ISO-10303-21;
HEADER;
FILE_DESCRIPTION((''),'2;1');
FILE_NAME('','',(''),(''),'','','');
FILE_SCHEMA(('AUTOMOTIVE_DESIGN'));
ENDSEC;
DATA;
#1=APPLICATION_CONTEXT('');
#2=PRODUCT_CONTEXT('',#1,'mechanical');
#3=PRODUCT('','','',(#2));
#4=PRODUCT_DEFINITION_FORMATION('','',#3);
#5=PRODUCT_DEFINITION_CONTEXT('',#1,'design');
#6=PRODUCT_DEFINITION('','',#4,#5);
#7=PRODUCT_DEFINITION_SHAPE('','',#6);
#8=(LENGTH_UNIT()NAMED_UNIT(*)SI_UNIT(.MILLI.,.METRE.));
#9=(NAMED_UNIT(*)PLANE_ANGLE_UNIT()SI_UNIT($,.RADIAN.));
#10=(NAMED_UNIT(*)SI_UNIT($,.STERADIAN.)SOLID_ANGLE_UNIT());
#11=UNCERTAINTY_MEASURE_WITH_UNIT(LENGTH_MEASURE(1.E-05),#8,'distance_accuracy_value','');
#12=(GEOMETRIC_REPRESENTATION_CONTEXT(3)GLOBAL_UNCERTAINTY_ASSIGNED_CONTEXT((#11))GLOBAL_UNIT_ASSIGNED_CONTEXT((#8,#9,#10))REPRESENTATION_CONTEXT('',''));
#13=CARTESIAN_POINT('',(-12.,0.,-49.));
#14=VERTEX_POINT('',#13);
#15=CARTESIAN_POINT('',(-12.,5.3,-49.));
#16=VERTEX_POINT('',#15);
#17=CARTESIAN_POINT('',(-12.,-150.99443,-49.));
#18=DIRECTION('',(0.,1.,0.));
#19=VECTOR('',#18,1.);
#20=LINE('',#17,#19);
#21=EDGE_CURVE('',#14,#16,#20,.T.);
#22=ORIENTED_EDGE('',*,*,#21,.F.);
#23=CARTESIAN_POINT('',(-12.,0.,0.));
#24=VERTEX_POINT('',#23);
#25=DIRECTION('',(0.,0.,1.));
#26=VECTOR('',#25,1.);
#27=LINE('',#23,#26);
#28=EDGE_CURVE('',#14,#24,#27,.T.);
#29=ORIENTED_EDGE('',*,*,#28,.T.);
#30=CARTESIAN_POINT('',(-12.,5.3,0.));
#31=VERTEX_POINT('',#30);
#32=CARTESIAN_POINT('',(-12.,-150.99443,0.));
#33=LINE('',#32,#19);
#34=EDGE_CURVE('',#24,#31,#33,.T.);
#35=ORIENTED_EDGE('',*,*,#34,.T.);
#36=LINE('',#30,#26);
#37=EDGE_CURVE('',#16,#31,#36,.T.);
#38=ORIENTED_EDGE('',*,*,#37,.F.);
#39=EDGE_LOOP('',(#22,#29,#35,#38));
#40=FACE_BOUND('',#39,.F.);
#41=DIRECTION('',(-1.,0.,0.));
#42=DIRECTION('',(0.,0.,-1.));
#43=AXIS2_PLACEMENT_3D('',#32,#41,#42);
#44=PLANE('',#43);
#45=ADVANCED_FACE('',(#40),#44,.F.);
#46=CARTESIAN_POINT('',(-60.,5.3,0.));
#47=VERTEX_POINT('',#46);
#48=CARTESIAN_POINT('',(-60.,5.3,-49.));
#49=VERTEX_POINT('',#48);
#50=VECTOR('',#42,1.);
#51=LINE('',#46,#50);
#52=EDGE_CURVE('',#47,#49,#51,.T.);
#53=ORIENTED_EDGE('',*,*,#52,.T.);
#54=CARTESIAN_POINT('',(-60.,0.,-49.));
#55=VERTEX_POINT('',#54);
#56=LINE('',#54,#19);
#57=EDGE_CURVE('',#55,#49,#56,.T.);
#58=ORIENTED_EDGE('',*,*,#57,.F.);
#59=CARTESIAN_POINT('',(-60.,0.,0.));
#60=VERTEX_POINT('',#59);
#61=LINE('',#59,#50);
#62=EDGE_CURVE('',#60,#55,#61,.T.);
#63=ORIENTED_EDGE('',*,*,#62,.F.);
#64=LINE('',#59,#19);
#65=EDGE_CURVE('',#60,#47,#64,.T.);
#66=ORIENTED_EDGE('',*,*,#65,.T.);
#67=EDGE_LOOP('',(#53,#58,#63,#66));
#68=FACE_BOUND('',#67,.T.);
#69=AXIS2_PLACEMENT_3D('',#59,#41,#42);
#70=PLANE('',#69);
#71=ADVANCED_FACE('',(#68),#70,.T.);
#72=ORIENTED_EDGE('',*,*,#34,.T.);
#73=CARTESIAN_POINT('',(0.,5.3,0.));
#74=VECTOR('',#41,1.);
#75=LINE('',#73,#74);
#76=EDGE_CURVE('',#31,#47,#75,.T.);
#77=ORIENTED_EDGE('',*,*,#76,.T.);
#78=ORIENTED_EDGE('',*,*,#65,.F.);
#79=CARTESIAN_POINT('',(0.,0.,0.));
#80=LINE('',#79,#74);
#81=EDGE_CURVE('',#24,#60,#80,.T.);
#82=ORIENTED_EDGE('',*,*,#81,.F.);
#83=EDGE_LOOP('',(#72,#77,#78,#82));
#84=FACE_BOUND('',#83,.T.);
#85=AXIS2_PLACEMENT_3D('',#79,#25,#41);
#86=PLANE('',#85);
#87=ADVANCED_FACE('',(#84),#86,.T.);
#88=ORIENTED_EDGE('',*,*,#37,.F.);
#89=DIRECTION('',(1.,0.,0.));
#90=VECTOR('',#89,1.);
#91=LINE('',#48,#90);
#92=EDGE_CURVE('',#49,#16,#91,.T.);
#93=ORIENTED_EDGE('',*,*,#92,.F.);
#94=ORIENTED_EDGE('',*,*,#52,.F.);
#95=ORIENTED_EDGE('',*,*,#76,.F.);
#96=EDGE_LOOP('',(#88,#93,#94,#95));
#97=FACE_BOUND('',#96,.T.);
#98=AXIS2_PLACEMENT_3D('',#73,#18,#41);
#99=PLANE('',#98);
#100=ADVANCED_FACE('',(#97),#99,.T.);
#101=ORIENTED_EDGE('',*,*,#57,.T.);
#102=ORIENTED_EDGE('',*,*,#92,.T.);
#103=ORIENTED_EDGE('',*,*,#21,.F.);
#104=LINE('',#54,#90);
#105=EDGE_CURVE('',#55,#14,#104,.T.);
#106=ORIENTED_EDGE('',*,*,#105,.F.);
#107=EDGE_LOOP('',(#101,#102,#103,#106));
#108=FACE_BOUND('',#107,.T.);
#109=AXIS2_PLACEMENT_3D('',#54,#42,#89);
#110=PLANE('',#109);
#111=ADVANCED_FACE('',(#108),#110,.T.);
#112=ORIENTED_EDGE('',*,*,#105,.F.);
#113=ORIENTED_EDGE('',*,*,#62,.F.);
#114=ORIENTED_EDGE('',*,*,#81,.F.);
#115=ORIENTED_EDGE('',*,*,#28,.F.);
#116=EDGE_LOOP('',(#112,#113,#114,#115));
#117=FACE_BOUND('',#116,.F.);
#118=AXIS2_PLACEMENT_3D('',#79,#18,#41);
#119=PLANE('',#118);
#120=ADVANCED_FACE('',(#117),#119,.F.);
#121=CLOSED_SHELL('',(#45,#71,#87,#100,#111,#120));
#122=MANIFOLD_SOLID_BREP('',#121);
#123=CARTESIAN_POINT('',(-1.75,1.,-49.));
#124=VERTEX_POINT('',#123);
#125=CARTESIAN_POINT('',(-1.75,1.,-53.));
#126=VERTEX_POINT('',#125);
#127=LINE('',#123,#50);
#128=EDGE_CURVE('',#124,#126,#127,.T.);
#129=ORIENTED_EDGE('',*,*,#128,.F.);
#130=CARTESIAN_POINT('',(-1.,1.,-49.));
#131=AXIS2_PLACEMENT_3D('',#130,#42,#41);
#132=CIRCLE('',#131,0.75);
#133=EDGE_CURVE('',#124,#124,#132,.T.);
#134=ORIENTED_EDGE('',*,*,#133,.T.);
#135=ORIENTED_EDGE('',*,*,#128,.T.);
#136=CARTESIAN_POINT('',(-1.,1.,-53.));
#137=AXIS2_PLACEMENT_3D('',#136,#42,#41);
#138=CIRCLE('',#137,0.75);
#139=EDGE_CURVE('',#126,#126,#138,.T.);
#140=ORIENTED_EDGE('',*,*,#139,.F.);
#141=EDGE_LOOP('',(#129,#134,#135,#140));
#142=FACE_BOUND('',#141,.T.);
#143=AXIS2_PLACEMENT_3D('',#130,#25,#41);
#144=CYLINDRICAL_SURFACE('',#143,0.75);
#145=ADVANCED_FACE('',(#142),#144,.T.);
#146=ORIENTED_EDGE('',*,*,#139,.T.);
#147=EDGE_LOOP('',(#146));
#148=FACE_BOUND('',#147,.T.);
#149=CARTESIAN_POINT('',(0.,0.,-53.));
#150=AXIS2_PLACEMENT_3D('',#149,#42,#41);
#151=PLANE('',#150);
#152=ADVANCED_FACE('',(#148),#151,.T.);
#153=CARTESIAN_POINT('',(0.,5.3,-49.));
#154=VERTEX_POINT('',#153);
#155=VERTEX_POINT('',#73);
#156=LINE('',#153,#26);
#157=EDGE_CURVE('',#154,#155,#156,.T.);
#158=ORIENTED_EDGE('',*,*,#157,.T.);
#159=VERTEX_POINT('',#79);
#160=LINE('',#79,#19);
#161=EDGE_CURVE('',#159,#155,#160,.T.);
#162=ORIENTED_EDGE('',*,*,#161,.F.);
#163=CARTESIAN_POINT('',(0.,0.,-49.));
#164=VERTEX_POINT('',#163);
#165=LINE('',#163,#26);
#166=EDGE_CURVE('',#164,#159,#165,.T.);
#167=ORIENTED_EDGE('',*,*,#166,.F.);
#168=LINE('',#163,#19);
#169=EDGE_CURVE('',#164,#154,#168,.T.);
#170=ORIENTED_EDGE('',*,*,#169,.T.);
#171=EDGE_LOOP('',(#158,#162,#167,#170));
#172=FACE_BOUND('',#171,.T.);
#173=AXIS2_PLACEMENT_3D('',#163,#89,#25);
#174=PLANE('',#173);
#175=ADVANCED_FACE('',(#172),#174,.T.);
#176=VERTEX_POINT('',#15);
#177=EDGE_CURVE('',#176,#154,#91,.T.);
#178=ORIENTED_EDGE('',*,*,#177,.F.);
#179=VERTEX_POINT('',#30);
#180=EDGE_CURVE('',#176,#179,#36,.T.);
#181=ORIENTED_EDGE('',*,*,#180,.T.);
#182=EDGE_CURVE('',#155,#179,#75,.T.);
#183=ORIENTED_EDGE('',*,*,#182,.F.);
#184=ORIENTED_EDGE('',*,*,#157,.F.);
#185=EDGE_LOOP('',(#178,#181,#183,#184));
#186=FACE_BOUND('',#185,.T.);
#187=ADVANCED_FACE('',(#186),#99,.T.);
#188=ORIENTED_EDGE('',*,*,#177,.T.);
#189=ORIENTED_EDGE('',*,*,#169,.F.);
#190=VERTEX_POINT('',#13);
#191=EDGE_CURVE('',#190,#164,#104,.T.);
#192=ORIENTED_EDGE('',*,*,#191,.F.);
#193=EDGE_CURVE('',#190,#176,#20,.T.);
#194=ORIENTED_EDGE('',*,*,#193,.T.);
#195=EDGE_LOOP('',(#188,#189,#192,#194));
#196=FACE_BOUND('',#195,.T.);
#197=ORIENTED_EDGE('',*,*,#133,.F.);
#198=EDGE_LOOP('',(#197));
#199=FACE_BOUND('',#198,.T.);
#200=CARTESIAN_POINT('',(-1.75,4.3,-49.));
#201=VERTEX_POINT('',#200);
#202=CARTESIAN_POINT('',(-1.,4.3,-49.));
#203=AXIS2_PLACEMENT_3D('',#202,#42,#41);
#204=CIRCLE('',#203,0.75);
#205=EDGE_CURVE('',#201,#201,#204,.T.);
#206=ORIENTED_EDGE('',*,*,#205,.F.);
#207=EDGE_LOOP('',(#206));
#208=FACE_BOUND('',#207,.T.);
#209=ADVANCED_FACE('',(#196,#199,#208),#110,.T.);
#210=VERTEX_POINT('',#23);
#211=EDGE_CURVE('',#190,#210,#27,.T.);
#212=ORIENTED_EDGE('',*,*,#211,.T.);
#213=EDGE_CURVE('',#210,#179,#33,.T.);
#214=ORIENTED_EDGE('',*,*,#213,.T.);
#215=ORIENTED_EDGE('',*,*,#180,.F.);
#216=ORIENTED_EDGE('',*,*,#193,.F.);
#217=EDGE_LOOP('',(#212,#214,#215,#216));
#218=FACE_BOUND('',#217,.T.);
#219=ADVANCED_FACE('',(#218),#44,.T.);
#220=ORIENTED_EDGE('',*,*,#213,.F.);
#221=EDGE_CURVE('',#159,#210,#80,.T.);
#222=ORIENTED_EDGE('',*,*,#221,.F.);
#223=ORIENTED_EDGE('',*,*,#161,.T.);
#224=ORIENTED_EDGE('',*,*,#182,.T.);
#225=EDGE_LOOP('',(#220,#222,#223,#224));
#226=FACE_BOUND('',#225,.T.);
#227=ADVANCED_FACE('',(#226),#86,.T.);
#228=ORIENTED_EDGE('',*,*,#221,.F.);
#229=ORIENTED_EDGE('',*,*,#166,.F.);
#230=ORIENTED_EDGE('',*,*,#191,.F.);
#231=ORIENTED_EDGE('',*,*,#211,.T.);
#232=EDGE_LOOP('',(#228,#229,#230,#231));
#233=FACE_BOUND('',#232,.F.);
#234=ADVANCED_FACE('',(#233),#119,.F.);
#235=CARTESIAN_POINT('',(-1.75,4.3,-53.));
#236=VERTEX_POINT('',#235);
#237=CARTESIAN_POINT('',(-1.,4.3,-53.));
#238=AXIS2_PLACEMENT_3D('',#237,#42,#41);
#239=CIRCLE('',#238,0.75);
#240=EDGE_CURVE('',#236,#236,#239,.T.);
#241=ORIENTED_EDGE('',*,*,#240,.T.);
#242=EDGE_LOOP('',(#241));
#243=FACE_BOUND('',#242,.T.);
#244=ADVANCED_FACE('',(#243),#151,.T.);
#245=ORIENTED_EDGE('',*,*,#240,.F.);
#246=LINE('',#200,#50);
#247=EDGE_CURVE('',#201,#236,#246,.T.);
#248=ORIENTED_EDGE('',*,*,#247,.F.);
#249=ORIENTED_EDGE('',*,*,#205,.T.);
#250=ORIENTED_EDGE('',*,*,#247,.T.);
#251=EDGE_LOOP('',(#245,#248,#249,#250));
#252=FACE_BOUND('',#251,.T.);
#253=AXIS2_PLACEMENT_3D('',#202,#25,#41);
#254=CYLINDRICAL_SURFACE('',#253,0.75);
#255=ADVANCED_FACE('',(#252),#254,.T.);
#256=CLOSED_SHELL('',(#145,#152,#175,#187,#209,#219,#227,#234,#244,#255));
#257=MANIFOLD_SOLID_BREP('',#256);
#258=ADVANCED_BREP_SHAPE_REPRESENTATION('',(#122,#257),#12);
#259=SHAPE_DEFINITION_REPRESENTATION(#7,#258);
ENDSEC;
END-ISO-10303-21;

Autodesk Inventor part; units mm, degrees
ref_plane "YZ Plane" through (0, 0, 0) normal (1, 0, 0) x (0, 1, 0)
ref_plane "XZ Plane" through (0, 0, 0) normal (0, 1, 0) x (-1, 0, 0)
ref_plane "XY Plane" through (0, 0, 0) normal (0, 0, 1) x (1, 0, 0)
sketch "Sketch1" plane through (0, 0, 0) normal (0, 1, 0) x (-1, 0, 0)
  line L0 (0, 0) -> (60, 0)
  line L1 (60, 0) -> (60, -49)
  line L2 (60, -49) -> (0, -49)
  line L3 (0, -49) -> (0, 0)
  dimension "d0" = 60
  dimension "d1" = 49
extrude "Extrusion1" add sketch "Sketch1" along normal blind 5.3
sketch "Sketch2" plane through (0, 5.3, 0) normal (0, 1, 0) x (1, 0, 0)
  line L0 (-60, 0) -> (0, 0) projected
  line L1 (-12, 0) -> (-12, 49)
  line L2 (0, 49) -> (-60, 49) projected
  line L3 (0, 0) -> (0, 49) projected
  dimension "d4" = 12
split body "Split1" sketch "Sketch2" result two bodies curves L1 first body at (-44, 0.5, -32.6667)
sketch "Sketch3" plane through (0, 0, -49) normal (0, 0, -1) x (-1, 0, 0)
  circle A0 centre (1, 4.3) radius 0.75
  circle A1 centre (1, 1) radius 0.75
  line L0 (0, 0) -> (0, 5.3) projected
  line L1 (0, 5.3) -> (12, 5.3) projected
  line L2 (0, 0) -> (12, 0) projected
  dimension "d5" = 1
  dimension "d6" = 1
  dimension "d7" = 1.5
  dimension "d8" = 1.5
  dimension "d9" = 1
  dimension "d10" = 1
extrude "Extrusion2" add sketch "Sketch3" along normal blind 4 bodies 3
properties part number "bateria"
